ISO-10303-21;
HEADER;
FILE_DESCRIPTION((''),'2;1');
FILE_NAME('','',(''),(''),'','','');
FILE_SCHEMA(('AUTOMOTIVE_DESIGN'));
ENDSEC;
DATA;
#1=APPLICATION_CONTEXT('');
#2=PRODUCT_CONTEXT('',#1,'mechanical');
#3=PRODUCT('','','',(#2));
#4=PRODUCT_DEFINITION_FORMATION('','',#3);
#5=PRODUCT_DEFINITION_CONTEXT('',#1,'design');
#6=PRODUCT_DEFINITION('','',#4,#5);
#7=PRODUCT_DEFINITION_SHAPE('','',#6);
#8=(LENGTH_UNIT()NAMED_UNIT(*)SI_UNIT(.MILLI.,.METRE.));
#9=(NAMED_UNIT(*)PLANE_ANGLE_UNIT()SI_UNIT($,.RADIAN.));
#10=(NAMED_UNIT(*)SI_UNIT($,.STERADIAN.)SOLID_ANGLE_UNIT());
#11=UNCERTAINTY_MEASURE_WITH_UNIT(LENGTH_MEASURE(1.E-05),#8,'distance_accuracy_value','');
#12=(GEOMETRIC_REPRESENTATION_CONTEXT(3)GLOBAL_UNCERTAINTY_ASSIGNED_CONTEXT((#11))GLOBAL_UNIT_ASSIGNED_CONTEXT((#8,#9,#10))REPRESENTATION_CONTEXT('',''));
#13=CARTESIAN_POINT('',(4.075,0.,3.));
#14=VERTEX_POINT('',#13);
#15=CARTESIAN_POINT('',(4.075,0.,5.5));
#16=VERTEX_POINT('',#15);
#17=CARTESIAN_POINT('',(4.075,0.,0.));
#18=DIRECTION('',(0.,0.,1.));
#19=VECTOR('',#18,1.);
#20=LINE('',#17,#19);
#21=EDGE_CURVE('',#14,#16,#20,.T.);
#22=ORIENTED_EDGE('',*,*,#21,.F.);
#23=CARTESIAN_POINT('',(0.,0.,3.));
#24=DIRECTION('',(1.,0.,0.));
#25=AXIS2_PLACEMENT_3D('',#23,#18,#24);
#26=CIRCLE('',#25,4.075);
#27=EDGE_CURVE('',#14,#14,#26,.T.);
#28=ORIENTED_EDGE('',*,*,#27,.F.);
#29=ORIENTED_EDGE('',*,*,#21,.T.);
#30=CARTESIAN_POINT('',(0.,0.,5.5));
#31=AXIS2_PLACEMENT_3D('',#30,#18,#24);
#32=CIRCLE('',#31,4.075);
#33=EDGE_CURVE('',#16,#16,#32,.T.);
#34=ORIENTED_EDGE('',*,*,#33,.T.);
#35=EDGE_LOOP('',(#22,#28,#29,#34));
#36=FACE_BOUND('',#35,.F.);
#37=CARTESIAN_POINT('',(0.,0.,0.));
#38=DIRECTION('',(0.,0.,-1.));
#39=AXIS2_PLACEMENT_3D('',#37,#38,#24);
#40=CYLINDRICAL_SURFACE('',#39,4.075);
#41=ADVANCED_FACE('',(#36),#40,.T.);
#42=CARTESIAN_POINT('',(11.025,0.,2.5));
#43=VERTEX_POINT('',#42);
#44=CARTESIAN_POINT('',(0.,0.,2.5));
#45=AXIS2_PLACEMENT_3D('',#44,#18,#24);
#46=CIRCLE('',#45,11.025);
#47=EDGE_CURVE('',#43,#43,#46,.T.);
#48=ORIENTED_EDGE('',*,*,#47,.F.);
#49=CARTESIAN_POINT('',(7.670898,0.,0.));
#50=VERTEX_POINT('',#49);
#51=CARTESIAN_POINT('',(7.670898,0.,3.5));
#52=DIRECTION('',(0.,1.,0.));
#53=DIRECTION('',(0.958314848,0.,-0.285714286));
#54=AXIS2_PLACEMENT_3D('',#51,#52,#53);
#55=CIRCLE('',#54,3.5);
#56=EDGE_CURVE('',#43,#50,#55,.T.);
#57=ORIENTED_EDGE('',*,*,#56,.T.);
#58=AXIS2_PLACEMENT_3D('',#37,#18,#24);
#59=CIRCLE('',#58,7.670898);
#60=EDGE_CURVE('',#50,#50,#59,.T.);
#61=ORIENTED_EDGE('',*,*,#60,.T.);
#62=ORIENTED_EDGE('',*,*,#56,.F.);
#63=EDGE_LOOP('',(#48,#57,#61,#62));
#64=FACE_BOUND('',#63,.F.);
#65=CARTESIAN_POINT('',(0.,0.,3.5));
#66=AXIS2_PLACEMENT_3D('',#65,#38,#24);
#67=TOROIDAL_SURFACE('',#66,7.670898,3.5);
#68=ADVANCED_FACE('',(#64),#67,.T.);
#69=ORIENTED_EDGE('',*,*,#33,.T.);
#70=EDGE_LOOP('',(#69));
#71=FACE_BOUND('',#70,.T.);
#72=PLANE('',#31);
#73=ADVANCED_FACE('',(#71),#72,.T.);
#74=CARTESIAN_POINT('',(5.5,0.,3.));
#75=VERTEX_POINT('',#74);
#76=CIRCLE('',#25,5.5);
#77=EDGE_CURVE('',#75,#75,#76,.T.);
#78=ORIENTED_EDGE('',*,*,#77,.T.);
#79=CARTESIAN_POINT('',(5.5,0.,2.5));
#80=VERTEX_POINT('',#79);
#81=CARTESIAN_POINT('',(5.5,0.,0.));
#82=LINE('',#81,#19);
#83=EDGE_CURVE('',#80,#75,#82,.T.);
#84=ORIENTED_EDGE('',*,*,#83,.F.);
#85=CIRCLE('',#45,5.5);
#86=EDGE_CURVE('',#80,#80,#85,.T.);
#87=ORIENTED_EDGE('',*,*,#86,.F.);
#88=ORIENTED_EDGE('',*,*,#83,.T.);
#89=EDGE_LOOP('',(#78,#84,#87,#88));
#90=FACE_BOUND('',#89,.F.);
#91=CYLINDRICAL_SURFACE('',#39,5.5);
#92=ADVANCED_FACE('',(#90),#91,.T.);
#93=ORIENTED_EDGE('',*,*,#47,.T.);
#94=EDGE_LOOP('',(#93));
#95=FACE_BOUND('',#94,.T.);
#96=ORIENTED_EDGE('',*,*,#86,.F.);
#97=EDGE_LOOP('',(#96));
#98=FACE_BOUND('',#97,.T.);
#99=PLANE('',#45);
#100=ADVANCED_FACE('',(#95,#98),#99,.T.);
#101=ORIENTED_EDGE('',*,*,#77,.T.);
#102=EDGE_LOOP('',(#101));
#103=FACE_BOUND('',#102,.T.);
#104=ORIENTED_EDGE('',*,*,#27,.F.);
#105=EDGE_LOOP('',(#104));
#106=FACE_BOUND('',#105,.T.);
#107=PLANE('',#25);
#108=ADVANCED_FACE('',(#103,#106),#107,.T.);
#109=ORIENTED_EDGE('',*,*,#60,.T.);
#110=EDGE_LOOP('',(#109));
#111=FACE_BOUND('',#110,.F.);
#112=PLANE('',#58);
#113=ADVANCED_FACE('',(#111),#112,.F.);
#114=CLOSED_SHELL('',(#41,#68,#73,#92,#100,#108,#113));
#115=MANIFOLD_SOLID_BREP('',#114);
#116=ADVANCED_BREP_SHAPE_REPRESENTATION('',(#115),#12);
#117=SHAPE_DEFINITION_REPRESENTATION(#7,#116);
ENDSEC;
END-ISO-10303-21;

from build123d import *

# Parameters (mm, degrees)
F0_R     = 11.025
F0_R_2   = 5.5
F1_DEPTH = 2.5
F0_R_3   = 4.075
F2_DEPTH = 3
F3_DEPTH = 5.5


# Not quite as in the source:
# - a fillet or chamfer that OpenCascade refuses, or shapes differently, is made with other operations: its cross-section is extruded or revolved along the edge and cut away or added


with BuildPart() as f1:
    # F0 (on Top) → F1 (new body)
    with BuildSketch(Plane.XY):
        Circle(F0_R)
        Circle(F0_R_2, mode=Mode.SUBTRACT)
    extrude(amount=F1_DEPTH)

    # F0 (on Top) → F2 (join)
    with BuildSketch(Plane.XY):
        Circle(F0_R_2)
        Circle(F0_R_3, mode=Mode.SUBTRACT)
    extrude(amount=F2_DEPTH)

    # F0 (on Top) → F3 (join)
    with BuildSketch(Plane.XY):
        Circle(F0_R_3)
    extrude(amount=F3_DEPTH)

    # F4: fillet of radius 3.5 on 1 edges, made by hand

    # F4_s1 → F4_t2 (revolve, cut)
    with BuildSketch(Plane.XZ):
        with BuildLine():
            ThreePointArc((11.025, 2.5), (9.7625481001, 0.6937569599), (7.6708980338, 0))
            Line((7.6708980338, 0), (11.025, 0))
            Line((11.025, 0), (11.025, 2.5))
        make_face()
    revolve(axis=Axis((0, 0, 0), (0, 0, 1)), mode=Mode.SUBTRACT)


solid = f1.part
